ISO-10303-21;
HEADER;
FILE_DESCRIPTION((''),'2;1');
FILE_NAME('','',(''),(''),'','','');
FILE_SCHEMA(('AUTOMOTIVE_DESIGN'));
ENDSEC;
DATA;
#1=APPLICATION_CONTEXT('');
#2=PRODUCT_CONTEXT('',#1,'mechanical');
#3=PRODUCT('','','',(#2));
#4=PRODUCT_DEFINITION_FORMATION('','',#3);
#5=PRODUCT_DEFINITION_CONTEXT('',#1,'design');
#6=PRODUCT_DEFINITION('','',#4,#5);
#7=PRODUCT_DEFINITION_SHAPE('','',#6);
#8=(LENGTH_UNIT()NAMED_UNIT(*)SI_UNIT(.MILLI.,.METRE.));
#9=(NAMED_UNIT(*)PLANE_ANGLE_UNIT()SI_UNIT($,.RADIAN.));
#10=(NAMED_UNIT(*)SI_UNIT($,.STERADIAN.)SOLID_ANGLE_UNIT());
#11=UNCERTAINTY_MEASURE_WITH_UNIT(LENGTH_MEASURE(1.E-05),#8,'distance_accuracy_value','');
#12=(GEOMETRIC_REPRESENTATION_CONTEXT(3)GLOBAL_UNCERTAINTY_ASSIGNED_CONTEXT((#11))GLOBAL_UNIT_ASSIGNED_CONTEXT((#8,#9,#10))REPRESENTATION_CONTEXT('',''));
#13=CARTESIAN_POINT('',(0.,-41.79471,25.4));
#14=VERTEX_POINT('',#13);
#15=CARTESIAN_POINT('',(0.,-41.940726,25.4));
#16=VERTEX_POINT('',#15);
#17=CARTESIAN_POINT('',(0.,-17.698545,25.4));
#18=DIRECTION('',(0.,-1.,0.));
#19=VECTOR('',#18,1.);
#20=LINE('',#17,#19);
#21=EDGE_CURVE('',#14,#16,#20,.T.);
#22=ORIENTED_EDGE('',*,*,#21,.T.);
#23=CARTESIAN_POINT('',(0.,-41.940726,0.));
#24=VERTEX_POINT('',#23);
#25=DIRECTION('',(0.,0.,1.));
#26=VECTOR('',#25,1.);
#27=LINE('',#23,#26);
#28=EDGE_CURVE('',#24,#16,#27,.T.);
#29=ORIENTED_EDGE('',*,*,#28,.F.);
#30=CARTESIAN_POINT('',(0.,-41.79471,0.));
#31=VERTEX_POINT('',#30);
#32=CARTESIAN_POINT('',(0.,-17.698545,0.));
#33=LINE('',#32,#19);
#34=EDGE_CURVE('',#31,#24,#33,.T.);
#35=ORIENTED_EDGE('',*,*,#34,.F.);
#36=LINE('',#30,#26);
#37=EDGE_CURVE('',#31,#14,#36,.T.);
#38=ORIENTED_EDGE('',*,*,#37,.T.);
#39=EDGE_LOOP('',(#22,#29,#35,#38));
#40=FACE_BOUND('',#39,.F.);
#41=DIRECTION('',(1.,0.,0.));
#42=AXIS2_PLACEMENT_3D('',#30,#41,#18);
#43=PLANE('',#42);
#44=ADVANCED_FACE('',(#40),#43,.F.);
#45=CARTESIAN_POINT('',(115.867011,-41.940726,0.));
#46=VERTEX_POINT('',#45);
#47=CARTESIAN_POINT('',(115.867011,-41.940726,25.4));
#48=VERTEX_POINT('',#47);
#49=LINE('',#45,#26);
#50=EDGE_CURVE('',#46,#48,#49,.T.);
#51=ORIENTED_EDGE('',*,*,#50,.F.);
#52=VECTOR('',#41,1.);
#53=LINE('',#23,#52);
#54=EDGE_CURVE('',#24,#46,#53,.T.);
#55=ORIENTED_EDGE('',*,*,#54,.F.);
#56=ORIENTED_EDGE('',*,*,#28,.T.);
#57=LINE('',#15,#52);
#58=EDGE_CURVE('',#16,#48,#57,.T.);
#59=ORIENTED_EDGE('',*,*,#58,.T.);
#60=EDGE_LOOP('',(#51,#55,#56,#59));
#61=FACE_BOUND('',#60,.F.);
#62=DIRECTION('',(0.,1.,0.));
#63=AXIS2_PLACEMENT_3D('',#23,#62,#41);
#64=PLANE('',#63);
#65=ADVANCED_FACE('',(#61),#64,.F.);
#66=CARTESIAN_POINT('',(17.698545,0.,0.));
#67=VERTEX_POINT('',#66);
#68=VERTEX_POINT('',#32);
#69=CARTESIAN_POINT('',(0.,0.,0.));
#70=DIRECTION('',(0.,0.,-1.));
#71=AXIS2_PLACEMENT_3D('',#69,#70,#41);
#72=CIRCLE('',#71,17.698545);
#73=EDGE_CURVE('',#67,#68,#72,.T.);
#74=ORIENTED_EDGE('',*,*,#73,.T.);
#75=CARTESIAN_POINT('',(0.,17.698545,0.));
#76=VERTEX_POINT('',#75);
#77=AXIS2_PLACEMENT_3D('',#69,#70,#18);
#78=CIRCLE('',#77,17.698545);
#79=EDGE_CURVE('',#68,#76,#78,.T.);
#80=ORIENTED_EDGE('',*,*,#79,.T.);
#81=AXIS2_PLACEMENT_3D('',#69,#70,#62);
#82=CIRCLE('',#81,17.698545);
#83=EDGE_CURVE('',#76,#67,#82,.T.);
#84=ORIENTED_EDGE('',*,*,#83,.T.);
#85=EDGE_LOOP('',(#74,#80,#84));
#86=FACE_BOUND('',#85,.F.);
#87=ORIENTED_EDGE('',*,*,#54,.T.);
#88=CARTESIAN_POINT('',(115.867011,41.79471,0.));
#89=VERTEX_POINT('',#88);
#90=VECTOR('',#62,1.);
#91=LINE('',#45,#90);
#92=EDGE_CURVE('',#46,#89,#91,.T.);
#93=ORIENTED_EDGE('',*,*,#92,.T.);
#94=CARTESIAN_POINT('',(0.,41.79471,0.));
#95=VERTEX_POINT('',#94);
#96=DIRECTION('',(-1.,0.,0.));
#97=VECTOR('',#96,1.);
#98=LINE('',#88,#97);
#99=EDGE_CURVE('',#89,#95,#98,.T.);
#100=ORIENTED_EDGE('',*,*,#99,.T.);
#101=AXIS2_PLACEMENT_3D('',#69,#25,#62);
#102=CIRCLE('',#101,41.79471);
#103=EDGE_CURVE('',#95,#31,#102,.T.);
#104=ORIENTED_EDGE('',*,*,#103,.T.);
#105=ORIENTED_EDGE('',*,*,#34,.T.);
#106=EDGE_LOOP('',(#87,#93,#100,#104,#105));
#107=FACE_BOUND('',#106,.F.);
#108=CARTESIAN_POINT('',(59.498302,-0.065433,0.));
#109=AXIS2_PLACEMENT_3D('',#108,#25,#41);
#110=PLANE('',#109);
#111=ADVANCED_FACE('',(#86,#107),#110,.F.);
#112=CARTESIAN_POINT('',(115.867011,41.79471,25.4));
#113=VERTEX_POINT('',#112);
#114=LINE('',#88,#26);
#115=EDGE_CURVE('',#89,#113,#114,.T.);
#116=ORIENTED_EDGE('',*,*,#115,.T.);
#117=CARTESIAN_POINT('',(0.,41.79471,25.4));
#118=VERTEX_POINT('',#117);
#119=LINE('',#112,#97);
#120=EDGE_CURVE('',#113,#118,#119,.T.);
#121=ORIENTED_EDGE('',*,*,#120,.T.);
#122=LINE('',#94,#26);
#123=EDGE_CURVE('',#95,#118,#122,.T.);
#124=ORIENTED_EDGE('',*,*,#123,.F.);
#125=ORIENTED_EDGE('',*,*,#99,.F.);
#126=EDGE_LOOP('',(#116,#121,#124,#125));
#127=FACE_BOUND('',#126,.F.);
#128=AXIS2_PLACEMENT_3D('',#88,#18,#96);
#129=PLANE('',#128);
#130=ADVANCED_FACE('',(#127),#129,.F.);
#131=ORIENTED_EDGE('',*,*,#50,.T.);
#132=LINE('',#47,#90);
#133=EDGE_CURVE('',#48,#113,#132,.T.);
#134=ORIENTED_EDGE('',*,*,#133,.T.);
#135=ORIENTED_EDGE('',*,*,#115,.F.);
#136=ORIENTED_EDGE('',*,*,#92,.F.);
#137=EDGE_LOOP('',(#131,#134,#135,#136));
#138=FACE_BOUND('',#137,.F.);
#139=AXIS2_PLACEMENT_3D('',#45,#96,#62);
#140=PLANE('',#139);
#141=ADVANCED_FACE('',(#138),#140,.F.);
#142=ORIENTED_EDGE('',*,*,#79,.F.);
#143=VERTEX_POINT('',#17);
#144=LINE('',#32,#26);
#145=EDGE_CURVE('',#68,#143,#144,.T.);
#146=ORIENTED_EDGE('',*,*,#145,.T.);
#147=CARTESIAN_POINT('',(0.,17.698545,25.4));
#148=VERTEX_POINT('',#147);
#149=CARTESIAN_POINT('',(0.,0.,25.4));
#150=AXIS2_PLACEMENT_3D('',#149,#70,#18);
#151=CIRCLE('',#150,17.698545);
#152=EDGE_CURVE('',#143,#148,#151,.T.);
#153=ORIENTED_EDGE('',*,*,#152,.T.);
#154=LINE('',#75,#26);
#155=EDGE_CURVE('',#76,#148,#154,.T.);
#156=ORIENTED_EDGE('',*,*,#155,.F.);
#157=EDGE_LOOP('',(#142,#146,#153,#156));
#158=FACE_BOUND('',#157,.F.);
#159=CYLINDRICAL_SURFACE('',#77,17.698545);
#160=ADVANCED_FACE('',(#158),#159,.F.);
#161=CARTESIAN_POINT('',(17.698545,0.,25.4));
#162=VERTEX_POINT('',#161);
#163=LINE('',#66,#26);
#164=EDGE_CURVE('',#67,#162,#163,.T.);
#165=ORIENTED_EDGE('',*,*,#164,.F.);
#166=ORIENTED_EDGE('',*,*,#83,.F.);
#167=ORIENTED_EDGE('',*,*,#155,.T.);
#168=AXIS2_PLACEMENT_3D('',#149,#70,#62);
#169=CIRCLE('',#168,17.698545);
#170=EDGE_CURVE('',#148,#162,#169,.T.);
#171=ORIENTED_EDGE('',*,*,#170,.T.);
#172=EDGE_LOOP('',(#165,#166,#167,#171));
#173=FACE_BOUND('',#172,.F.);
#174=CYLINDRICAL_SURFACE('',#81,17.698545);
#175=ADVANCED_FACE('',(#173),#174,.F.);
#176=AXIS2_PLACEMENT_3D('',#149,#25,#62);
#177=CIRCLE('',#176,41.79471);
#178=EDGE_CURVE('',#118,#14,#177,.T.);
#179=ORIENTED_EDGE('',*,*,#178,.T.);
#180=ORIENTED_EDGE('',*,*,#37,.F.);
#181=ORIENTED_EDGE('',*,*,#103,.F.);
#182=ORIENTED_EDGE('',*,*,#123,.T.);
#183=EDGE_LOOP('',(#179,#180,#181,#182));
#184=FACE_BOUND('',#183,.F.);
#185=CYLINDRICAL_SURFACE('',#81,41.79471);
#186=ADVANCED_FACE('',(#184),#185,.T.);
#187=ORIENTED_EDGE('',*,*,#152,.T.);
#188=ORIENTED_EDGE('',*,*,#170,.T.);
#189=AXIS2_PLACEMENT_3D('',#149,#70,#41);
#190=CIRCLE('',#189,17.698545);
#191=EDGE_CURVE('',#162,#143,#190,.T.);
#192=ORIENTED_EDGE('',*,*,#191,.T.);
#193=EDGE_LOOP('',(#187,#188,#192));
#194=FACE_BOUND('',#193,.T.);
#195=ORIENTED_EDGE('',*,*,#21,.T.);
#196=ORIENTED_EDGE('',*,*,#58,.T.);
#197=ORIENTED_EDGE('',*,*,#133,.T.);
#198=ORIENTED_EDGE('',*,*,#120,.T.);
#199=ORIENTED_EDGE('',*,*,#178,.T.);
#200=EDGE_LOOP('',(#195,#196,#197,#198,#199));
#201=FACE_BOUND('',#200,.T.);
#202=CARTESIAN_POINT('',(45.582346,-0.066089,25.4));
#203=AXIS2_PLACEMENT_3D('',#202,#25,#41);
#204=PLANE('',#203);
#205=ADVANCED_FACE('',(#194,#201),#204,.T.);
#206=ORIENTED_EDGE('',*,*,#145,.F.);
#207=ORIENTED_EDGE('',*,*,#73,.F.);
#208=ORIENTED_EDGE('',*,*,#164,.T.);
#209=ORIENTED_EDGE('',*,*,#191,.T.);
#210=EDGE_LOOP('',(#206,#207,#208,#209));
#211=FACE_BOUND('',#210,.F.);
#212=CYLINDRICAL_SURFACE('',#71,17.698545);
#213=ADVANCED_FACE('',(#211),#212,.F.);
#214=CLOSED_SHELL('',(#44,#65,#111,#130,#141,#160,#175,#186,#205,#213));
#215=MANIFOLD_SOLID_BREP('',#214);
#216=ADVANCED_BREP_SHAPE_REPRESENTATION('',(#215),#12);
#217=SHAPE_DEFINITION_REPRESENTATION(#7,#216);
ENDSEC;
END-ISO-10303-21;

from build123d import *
from build123d import SkipClean  # not in build123d's __all__

# Parameters (mm, degrees)
F1_DEPTH  = 25.4
F1_FACE_R = 17.6985452631
F2_DEPTH  = 25.4
F3_DEPTH  = 25.4


with BuildPart() as f1:
    # F0 (on Top) → F1 (new body)
    with BuildSketch(Plane.XY):
        with BuildLine():
            ThreePointArc((0, 41.7947099158), (29.5533227992, 29.5533227992), (41.7947099158, 0))
            ThreePointArc((41.7947099158, 0), (29.5533227992, -29.5533227992), (0, -41.7947099158))
            Line((0, -41.7947099158), (0, -41.9407263398))
            Line((0, -41.9407263398), (115.8670112491, -41.9407263398))
            Line((115.8670112491, -41.9407263398), (115.8670112491, 41.7947099158))
            Line((115.8670112491, 41.7947099158), (0, 41.7947099158))
        make_face()
        with BuildLine():
            ThreePointArc((0, -41.7947099158), (29.5533227992, -29.5533227992), (41.7947099158, 0))
            ThreePointArc((41.7947099158, 0), (29.5533227992, 29.5533227992), (0, 41.7947099158))
            Line((0, 41.7947099158), (0, 17.6985452631))
            ThreePointArc((0, 17.6985452631), (12.5147613727, 12.5147613727), (17.6985452631, 0))
            ThreePointArc((17.6985452631, 0), (12.5147613727, -12.5147613727), (0, -17.6985452631))
            Line((0, -17.6985452631), (0, -41.7947099158))
        make_face()
        with BuildLine():
            Line((0, 17.6985452631), (0, 41.7947099158))
            ThreePointArc((0, 41.7947099158), (-41.7947099158, 0), (0, -41.7947099158))
            Line((0, -41.7947099158), (0, -17.6985452631))
            ThreePointArc((0, -17.6985452631), (-17.6985452631, 0), (0, 17.6985452631))
        make_face()
    extrude(amount=F1_DEPTH)

    # F1_face (on face) + F0 (on Top) → F2 (join)
    with BuildSketch(Plane(origin=(44.792448598, -0.0617990101, 25.4), x_dir=(1, 0, 0), z_dir=(0, 0, 1))):
        with BuildLine():
            Line((71.0745626511, 41.8565089259), (-44.792448598, 41.8565089259))
            ThreePointArc((-44.792448598, 41.8565089259), (-86.5871585138, 0.0617990101), (-44.792448598, -41.7329109057))
            Line((-44.792448598, -41.7329109057), (-44.792448598, -41.8789273297))
            Line((-44.792448598, -41.8789273297), (71.0745626511, -41.8789273297))
            Line((71.0745626511, -41.8789273297), (71.0745626511, 41.8565089259))
        make_face()
        with Locations((-44.792448598, 0.0617990101)):
            Circle(F1_FACE_R, mode=Mode.SUBTRACT)
    with BuildSketch(Plane.XY):
        with BuildLine():
            ThreePointArc((0, -41.7947099158), (29.5533227992, -29.5533227992), (41.7947099158, 0))
            ThreePointArc((41.7947099158, 0), (29.5533227992, 29.5533227992), (0, 41.7947099158))
            Line((0, 41.7947099158), (0, 17.6985452631))
            ThreePointArc((0, 17.6985452631), (12.5147613727, 12.5147613727), (17.6985452631, 0))
            ThreePointArc((17.6985452631, 0), (12.5147613727, -12.5147613727), (0, -17.6985452631))
            Line((0, -17.6985452631), (0, -41.7947099158))
        make_face()
        with BuildLine():
            ThreePointArc((0, 41.7947099158), (29.5533227992, 29.5533227992), (41.7947099158, 0))
            ThreePointArc((41.7947099158, 0), (29.5533227992, -29.5533227992), (0, -41.7947099158))
            Line((0, -41.7947099158), (0, -41.9407263398))
            Line((0, -41.9407263398), (115.8670112491, -41.9407263398))
            Line((115.8670112491, -41.9407263398), (115.8670112491, 41.7947099158))
            Line((115.8670112491, 41.7947099158), (0, 41.7947099158))
        make_face()
        with BuildLine():
            Line((0, 17.6985452631), (0, 41.7947099158))
            ThreePointArc((0, 41.7947099158), (-41.7947099158, 0), (0, -41.7947099158))
            Line((0, -41.7947099158), (0, -17.6985452631))
            ThreePointArc((0, -17.6985452631), (-17.6985452631, 0), (0, 17.6985452631))
        make_face()
    with SkipClean():  # cleaning this boolean's faces spoils the solid; the shape is the same uncleaned
        extrude(amount=F2_DEPTH)

    # F3 (cut): a face of the model
    f3_faces = [f1.faces().sort_by_distance(p)[0] for p in [
        (44.792448598, -0.0617990101, 50.8),
    ]]
    extrude(f3_faces, amount=-F3_DEPTH, mode=Mode.SUBTRACT)


solid = f1.part
